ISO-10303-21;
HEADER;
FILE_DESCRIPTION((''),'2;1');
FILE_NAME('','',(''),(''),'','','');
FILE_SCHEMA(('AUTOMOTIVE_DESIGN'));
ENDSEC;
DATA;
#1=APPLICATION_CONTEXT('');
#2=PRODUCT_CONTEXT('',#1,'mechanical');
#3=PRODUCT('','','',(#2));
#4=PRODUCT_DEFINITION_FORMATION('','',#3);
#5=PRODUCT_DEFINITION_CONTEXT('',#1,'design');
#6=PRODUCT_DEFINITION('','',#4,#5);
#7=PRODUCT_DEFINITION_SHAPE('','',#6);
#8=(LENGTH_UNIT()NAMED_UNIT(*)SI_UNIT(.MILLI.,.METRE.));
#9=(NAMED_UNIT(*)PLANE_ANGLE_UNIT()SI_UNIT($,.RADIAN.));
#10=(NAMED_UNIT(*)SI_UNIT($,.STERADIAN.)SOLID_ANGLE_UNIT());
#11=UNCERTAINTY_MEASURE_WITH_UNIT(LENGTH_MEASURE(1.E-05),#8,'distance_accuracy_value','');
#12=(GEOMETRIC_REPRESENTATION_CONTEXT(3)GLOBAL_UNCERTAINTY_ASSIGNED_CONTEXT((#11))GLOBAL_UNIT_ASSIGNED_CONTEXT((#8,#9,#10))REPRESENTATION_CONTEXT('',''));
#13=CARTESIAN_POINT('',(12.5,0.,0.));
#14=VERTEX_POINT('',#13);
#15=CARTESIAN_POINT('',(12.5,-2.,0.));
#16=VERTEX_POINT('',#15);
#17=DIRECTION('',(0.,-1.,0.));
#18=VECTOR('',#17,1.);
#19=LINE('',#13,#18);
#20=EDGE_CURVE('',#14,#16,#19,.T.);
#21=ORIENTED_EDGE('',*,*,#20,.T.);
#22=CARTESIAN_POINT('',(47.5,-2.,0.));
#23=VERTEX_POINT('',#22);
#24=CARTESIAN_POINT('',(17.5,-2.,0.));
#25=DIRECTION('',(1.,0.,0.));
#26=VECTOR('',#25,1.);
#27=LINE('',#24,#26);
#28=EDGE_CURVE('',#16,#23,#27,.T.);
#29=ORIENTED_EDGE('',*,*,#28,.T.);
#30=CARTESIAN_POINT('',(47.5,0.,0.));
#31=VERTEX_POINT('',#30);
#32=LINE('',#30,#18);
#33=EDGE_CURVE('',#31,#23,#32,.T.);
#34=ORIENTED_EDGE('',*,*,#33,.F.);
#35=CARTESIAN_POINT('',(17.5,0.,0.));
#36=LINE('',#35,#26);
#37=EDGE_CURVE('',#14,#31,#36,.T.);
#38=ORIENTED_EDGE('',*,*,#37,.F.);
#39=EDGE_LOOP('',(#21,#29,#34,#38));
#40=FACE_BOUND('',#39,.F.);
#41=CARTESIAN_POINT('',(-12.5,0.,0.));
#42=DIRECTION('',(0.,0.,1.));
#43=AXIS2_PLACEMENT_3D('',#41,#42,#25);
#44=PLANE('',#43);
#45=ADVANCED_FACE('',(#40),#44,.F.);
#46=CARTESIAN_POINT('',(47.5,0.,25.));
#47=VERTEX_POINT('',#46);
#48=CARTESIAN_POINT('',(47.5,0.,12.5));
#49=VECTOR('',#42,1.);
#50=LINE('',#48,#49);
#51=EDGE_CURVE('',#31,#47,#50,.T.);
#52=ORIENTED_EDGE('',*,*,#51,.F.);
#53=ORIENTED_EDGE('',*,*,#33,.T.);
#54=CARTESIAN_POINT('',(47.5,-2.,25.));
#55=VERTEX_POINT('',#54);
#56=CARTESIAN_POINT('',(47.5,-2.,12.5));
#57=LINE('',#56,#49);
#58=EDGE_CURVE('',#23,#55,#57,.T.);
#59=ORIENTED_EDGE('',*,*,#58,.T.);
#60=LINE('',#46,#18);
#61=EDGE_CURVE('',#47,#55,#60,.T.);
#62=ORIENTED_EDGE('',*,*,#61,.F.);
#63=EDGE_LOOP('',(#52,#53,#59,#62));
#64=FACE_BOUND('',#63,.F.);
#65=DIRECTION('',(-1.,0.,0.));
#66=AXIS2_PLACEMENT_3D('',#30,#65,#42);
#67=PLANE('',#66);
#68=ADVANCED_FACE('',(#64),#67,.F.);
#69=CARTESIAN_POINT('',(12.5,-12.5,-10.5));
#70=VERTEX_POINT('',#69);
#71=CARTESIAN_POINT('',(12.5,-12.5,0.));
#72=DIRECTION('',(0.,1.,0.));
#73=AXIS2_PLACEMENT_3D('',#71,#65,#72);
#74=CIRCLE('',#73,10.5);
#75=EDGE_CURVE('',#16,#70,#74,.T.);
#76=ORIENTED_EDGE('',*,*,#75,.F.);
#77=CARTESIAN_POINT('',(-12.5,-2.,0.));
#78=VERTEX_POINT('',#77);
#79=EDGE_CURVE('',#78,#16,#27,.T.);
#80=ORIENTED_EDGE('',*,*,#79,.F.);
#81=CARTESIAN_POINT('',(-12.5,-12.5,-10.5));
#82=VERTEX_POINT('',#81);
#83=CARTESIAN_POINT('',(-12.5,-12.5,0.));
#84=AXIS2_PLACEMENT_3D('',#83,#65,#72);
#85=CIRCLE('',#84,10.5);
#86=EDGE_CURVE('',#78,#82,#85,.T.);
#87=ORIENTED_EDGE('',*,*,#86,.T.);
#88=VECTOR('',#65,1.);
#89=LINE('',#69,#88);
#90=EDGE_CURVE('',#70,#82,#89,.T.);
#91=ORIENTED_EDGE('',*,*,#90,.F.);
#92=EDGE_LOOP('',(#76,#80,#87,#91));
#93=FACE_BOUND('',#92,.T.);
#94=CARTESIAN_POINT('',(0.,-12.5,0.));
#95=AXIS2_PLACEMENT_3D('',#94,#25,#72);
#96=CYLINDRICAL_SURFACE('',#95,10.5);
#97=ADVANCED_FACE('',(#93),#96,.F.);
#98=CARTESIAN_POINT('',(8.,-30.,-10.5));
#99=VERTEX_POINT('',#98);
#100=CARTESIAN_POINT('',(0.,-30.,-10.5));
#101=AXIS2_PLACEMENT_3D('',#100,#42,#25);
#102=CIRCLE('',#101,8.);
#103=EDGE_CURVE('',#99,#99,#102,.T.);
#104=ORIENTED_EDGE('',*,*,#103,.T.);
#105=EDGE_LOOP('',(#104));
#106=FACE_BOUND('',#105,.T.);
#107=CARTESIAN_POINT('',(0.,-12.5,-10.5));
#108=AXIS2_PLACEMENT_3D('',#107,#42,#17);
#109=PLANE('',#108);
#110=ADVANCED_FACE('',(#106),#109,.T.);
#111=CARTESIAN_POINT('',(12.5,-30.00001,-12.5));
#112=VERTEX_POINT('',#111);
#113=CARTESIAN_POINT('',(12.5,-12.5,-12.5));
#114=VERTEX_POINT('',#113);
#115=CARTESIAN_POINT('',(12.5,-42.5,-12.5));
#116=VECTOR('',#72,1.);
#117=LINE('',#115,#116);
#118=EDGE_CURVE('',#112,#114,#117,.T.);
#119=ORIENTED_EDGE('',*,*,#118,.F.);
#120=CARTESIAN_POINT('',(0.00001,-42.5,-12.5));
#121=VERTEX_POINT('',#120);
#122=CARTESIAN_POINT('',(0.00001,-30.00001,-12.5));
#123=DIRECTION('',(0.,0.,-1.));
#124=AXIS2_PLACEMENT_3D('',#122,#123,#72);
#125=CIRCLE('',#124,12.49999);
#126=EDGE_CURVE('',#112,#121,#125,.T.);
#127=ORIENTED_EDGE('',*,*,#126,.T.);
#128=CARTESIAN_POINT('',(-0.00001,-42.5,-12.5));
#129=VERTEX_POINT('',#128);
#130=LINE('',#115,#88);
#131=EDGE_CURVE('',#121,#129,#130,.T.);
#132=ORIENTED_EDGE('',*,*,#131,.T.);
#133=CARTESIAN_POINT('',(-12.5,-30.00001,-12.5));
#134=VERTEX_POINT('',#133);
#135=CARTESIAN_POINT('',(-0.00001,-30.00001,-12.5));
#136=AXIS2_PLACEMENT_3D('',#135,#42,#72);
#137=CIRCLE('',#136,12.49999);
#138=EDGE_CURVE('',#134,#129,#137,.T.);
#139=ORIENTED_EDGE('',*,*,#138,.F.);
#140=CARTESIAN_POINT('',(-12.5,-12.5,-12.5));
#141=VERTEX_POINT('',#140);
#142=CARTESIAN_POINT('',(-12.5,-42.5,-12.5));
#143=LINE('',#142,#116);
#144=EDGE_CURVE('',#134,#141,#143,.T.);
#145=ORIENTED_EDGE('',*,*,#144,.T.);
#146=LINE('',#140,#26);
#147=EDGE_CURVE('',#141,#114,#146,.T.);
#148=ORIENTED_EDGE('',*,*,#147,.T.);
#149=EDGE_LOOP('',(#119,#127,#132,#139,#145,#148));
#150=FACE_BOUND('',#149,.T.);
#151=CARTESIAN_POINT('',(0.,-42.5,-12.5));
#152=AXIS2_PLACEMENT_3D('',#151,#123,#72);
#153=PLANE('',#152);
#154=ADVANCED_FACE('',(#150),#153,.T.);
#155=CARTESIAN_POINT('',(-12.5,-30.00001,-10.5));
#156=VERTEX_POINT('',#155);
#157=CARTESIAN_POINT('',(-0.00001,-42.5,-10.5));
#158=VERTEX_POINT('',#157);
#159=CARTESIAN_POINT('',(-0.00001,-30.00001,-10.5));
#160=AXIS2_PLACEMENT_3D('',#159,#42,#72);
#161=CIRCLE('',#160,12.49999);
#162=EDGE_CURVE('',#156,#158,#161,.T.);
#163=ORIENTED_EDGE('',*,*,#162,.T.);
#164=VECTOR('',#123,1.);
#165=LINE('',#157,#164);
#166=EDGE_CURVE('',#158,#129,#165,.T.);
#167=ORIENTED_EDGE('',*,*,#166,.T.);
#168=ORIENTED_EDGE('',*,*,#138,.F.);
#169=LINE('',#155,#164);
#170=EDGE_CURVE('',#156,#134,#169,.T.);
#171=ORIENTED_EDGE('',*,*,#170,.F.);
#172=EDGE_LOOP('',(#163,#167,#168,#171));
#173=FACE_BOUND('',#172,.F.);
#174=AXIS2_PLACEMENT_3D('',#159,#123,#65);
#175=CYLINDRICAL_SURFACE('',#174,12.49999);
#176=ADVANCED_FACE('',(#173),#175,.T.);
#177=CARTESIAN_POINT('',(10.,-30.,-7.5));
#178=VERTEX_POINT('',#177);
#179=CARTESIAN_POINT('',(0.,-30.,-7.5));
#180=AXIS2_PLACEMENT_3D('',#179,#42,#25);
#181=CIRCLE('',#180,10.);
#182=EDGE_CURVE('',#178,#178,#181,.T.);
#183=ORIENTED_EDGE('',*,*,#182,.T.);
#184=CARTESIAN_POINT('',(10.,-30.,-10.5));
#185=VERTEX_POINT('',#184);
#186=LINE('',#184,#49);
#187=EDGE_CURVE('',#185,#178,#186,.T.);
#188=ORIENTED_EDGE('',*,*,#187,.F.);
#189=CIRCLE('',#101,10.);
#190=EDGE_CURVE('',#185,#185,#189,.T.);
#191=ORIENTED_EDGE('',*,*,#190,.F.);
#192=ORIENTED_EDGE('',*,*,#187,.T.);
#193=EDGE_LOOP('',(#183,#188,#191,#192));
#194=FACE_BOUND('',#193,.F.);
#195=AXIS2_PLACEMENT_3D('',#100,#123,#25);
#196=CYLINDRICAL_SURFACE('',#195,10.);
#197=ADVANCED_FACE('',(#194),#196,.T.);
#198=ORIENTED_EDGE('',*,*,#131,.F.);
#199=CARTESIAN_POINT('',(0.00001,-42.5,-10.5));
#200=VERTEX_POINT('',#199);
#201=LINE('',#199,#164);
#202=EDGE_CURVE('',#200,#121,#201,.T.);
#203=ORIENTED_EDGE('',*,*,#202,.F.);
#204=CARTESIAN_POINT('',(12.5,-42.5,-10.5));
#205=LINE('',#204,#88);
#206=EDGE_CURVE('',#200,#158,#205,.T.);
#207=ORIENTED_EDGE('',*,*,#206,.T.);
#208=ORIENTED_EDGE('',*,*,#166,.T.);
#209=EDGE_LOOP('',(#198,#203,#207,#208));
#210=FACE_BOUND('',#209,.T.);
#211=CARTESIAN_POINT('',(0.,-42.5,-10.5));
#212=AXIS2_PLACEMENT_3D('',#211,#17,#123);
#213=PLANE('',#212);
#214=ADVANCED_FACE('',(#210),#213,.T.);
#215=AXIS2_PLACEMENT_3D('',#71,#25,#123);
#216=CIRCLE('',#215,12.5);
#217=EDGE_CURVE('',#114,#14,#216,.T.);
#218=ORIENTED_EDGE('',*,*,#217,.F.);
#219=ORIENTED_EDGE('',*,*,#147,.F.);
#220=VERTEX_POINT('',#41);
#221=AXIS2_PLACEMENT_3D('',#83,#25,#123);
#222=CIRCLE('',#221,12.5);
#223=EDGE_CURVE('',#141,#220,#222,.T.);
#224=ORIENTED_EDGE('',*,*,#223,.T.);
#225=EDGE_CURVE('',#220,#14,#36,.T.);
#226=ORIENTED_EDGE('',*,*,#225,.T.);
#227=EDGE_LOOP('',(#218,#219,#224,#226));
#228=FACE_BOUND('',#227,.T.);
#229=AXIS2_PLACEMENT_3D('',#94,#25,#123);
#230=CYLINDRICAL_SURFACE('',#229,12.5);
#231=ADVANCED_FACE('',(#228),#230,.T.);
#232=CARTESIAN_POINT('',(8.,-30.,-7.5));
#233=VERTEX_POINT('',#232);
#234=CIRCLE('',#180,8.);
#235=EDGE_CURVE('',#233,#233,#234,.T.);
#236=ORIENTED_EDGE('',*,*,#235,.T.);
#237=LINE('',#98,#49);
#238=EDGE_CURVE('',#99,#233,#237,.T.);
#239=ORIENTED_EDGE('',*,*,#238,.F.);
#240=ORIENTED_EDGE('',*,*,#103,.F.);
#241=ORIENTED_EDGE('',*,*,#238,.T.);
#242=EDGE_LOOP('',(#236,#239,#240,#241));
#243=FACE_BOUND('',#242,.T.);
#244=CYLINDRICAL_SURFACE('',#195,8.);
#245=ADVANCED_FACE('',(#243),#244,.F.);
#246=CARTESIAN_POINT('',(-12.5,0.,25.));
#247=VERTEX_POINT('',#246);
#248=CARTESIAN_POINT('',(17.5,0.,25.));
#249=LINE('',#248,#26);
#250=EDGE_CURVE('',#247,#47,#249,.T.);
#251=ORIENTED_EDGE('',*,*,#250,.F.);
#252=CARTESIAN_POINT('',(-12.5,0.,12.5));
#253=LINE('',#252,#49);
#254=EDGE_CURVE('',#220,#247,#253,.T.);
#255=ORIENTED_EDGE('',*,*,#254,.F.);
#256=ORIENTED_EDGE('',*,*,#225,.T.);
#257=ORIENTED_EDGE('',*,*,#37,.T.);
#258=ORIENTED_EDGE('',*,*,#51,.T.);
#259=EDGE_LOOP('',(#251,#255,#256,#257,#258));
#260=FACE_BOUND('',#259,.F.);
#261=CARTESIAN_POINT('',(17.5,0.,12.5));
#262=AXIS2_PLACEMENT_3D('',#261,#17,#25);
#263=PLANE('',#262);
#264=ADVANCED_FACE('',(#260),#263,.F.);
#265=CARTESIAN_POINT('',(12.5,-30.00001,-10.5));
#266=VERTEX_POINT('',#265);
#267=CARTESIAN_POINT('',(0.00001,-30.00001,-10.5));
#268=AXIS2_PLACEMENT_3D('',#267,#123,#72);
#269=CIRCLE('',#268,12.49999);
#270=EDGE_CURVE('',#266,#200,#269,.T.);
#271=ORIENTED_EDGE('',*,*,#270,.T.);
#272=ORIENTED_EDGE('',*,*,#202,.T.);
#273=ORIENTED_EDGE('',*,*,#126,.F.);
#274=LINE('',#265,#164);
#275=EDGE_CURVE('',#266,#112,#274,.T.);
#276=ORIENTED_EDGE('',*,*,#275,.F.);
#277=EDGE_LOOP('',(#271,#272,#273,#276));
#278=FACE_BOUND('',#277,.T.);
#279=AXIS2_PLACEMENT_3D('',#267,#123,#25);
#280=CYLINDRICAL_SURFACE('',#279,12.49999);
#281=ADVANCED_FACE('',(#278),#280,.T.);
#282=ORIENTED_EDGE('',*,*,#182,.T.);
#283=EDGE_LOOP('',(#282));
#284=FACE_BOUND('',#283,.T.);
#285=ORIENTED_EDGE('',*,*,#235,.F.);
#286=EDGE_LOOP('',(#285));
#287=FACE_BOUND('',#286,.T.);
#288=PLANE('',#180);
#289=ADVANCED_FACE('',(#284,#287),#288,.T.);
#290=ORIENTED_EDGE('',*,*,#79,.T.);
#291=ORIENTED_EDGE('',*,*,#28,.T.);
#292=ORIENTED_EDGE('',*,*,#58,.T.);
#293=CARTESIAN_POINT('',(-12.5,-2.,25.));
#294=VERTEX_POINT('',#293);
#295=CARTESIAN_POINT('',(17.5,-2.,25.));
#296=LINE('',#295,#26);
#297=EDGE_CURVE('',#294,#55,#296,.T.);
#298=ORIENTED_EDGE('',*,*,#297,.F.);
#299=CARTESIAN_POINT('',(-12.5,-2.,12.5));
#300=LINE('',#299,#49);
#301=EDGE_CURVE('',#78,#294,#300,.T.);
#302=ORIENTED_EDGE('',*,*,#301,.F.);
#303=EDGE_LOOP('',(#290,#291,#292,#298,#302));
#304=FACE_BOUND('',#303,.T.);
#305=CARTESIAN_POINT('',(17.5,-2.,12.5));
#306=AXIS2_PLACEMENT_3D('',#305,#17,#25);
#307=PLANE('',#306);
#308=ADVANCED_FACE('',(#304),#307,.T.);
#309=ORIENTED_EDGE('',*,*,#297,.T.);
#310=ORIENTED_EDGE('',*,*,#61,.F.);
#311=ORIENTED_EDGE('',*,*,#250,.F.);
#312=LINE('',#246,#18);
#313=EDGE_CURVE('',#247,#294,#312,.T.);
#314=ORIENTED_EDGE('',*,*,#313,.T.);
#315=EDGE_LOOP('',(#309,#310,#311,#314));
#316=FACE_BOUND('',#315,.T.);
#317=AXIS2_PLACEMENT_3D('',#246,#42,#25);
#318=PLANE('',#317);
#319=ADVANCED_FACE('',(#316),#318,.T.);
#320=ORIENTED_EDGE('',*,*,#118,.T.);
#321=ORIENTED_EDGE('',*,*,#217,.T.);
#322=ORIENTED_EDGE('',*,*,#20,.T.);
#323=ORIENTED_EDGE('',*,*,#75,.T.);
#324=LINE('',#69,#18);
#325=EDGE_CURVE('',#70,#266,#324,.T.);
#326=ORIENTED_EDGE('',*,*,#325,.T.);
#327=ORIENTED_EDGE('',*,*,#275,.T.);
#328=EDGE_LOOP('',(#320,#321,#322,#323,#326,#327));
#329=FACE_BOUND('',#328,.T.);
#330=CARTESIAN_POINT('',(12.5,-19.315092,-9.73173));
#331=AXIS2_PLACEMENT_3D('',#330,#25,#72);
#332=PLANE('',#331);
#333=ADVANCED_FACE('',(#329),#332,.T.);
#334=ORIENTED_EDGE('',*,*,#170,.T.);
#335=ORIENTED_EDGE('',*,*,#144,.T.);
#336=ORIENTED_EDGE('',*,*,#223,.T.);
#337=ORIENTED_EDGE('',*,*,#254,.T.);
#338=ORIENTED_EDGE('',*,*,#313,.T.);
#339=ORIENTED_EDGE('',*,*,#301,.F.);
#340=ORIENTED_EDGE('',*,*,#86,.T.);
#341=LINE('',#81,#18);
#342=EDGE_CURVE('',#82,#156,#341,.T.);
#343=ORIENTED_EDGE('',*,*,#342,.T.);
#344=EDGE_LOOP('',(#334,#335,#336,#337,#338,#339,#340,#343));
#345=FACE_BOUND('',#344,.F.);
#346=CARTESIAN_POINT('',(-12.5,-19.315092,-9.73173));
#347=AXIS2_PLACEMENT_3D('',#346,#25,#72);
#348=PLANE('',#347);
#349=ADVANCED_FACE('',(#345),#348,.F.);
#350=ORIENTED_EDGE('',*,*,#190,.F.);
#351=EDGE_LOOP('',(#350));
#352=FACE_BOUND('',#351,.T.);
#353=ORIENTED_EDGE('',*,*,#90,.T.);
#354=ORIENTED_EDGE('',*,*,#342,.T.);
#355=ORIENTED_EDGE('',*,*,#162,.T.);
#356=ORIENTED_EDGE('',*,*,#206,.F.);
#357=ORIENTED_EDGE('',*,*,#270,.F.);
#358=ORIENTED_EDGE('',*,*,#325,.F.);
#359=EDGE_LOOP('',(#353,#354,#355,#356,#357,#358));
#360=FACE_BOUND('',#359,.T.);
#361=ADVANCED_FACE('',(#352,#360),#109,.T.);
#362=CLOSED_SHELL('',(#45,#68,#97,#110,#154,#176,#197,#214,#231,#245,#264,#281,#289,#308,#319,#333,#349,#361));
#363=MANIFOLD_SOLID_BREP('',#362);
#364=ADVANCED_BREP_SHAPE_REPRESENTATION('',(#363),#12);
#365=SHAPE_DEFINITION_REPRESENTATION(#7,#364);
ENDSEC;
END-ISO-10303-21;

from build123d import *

# Parameters (mm, degrees)
F0_W     = 60
F0_H     = 25
F1_DEPTH = 2
F3_DEPTH = 12.5
F4_R     = 12.49999
F5_R     = 10
F5_R_2   = 8
F6_DEPTH = 3


# Not quite as in the source:
# - a fillet or chamfer is up to 0.001 mm smaller than in the source, because OpenCascade refuses the exact size


with BuildPart() as f1:
    # F0 (on Front) → F1 (new body)
    with BuildSketch(Plane.XZ):
        with Locations((17.5, 12.5)):
            Rectangle(F0_W, F0_H)
    extrude(amount=F1_DEPTH)

    # F2 (on Right) → F3 (join, symmetric)
    with BuildSketch(Plane.YZ):
        with BuildLine():
            Line((-42.5, -12.5), (-12.5, -12.5))
            ThreePointArc((-12.5, -12.5), (-3.6611652352, -8.8388347648), (0, 0))
            Line((0, 0), (-2, 0))
            ThreePointArc((-2, 0), (-5.0753787975, -7.4246212025), (-12.5, -10.5))
            Line((-12.5, -10.5), (-42.5, -10.5))
            Line((-42.5, -10.5), (-42.5, -12.5))
        make_face()
    extrude(amount=F3_DEPTH, both=True)

    # F4 (radius 12.5 in the source; OpenCascade refuses exactly that, so slightly less here)
    f4_edges = [f1.edges().sort_by_distance(p)[0] for p in [
        (-12.5, -42.5, -11.5),
        (12.5, -42.5, -11.5),
    ]]
    fillet(f4_edges, radius=F4_R)

    # F5 (on face) → F6 (join)
    with BuildSketch(Plane.XY.offset(-10.5)):
        with Locations((0, -30)):
            Circle(F5_R)
        with Locations((0, -30)):
            Circle(F5_R_2, mode=Mode.SUBTRACT)
    extrude(amount=F6_DEPTH)


solid = f1.part
